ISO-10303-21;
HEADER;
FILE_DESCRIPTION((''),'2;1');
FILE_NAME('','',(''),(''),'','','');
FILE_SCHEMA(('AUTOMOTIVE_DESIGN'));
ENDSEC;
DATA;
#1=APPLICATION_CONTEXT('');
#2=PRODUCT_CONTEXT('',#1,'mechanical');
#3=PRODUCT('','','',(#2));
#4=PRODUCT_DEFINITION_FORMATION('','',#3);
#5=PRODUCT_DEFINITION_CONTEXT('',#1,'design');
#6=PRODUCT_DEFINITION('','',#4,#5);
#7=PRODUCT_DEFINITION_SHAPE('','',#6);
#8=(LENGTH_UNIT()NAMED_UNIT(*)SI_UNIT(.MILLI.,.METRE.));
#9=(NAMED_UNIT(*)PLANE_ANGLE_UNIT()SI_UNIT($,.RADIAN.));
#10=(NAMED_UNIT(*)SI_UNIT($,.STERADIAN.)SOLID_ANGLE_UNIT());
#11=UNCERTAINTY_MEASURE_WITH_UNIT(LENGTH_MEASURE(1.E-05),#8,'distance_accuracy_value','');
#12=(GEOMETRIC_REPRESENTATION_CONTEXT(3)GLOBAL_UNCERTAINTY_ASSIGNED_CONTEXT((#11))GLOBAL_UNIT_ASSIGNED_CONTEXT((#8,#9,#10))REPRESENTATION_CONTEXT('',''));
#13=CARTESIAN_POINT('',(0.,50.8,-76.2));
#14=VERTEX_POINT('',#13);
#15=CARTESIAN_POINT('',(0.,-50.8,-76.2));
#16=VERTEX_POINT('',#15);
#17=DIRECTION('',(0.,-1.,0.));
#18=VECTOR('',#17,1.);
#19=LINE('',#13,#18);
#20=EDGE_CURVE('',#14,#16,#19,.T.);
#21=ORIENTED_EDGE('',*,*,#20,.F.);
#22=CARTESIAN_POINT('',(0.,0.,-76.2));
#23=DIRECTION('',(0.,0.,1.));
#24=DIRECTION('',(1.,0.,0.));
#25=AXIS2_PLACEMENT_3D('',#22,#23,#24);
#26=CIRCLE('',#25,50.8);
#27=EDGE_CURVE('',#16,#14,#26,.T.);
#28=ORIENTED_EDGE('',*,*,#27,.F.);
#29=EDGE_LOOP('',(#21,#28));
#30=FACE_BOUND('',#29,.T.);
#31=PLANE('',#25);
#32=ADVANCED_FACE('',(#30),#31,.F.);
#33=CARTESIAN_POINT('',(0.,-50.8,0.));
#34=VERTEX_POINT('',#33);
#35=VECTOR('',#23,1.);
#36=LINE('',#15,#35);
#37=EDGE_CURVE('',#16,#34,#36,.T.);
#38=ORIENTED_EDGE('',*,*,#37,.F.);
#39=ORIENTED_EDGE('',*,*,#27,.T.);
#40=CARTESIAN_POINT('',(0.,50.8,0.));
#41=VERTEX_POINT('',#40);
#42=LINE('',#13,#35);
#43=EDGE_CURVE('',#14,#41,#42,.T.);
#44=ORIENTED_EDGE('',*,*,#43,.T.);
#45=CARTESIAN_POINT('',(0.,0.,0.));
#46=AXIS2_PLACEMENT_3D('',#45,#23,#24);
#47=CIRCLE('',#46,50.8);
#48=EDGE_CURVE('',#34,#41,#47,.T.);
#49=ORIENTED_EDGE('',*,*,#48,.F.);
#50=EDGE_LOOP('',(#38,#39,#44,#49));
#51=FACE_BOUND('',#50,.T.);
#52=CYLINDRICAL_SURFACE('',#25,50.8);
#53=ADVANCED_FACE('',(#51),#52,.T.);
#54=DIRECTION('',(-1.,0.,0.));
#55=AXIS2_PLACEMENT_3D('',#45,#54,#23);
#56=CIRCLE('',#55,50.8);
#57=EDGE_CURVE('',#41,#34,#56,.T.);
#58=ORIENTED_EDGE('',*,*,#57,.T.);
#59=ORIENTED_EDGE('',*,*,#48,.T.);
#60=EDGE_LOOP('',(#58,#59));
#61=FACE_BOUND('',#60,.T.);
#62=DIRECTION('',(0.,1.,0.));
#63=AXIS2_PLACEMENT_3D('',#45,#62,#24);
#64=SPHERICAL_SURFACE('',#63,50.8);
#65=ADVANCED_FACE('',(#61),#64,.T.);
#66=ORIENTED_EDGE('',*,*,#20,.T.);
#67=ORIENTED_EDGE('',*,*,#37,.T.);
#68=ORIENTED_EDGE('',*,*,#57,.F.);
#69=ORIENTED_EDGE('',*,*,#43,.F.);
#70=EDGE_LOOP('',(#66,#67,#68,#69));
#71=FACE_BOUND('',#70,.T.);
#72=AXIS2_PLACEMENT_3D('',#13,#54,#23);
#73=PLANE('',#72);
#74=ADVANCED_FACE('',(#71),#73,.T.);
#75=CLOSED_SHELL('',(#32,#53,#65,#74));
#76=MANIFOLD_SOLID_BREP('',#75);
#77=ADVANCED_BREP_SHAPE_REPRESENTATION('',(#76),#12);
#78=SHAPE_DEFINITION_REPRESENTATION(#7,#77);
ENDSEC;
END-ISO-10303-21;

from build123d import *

# Parameters (mm, degrees)
CUT_EXTRUDE3_DEPTH = 762
SWEEP1_START       = -76.2
SWEEP1_DEPTH       = 76.2


# Read off the part's stored shape, not the designer's step: Sweep1
with BuildPart() as part:
    # Sketch2 → Revolve3 (revolve)
    with BuildSketch(Plane.XY):
        with BuildLine():
            Line((0, 50.8), (0, -50.8))
            ThreePointArc((0, -50.8), (50.8, 0), (0, 50.8))
        make_face()
    revolve(axis=Axis((0, 50.8, 0), (0, -1, 0)))

    # Sketch2<4> → Cut-Extrude3 (cut)
    with BuildSketch(Plane.XY):
        with BuildLine():
            Line((0, 50.8), (0, -50.8))
            ThreePointArc((0, -50.8), (50.8, 0), (0, 50.8))
        make_face()
    extrude(amount=-CUT_EXTRUDE3_DEPTH, mode=Mode.SUBTRACT)

    # Sweep1 outline → Sweep1 (add)
    with BuildSketch(Plane.XY.offset(SWEEP1_START)):
        with BuildLine():
            ThreePointArc((0, -50.8), (50.8, 0), (0, 50.8))
            Line((0, 50.8), (0, -50.8))
        make_face()
    extrude(amount=SWEEP1_DEPTH)


solid = part.part
